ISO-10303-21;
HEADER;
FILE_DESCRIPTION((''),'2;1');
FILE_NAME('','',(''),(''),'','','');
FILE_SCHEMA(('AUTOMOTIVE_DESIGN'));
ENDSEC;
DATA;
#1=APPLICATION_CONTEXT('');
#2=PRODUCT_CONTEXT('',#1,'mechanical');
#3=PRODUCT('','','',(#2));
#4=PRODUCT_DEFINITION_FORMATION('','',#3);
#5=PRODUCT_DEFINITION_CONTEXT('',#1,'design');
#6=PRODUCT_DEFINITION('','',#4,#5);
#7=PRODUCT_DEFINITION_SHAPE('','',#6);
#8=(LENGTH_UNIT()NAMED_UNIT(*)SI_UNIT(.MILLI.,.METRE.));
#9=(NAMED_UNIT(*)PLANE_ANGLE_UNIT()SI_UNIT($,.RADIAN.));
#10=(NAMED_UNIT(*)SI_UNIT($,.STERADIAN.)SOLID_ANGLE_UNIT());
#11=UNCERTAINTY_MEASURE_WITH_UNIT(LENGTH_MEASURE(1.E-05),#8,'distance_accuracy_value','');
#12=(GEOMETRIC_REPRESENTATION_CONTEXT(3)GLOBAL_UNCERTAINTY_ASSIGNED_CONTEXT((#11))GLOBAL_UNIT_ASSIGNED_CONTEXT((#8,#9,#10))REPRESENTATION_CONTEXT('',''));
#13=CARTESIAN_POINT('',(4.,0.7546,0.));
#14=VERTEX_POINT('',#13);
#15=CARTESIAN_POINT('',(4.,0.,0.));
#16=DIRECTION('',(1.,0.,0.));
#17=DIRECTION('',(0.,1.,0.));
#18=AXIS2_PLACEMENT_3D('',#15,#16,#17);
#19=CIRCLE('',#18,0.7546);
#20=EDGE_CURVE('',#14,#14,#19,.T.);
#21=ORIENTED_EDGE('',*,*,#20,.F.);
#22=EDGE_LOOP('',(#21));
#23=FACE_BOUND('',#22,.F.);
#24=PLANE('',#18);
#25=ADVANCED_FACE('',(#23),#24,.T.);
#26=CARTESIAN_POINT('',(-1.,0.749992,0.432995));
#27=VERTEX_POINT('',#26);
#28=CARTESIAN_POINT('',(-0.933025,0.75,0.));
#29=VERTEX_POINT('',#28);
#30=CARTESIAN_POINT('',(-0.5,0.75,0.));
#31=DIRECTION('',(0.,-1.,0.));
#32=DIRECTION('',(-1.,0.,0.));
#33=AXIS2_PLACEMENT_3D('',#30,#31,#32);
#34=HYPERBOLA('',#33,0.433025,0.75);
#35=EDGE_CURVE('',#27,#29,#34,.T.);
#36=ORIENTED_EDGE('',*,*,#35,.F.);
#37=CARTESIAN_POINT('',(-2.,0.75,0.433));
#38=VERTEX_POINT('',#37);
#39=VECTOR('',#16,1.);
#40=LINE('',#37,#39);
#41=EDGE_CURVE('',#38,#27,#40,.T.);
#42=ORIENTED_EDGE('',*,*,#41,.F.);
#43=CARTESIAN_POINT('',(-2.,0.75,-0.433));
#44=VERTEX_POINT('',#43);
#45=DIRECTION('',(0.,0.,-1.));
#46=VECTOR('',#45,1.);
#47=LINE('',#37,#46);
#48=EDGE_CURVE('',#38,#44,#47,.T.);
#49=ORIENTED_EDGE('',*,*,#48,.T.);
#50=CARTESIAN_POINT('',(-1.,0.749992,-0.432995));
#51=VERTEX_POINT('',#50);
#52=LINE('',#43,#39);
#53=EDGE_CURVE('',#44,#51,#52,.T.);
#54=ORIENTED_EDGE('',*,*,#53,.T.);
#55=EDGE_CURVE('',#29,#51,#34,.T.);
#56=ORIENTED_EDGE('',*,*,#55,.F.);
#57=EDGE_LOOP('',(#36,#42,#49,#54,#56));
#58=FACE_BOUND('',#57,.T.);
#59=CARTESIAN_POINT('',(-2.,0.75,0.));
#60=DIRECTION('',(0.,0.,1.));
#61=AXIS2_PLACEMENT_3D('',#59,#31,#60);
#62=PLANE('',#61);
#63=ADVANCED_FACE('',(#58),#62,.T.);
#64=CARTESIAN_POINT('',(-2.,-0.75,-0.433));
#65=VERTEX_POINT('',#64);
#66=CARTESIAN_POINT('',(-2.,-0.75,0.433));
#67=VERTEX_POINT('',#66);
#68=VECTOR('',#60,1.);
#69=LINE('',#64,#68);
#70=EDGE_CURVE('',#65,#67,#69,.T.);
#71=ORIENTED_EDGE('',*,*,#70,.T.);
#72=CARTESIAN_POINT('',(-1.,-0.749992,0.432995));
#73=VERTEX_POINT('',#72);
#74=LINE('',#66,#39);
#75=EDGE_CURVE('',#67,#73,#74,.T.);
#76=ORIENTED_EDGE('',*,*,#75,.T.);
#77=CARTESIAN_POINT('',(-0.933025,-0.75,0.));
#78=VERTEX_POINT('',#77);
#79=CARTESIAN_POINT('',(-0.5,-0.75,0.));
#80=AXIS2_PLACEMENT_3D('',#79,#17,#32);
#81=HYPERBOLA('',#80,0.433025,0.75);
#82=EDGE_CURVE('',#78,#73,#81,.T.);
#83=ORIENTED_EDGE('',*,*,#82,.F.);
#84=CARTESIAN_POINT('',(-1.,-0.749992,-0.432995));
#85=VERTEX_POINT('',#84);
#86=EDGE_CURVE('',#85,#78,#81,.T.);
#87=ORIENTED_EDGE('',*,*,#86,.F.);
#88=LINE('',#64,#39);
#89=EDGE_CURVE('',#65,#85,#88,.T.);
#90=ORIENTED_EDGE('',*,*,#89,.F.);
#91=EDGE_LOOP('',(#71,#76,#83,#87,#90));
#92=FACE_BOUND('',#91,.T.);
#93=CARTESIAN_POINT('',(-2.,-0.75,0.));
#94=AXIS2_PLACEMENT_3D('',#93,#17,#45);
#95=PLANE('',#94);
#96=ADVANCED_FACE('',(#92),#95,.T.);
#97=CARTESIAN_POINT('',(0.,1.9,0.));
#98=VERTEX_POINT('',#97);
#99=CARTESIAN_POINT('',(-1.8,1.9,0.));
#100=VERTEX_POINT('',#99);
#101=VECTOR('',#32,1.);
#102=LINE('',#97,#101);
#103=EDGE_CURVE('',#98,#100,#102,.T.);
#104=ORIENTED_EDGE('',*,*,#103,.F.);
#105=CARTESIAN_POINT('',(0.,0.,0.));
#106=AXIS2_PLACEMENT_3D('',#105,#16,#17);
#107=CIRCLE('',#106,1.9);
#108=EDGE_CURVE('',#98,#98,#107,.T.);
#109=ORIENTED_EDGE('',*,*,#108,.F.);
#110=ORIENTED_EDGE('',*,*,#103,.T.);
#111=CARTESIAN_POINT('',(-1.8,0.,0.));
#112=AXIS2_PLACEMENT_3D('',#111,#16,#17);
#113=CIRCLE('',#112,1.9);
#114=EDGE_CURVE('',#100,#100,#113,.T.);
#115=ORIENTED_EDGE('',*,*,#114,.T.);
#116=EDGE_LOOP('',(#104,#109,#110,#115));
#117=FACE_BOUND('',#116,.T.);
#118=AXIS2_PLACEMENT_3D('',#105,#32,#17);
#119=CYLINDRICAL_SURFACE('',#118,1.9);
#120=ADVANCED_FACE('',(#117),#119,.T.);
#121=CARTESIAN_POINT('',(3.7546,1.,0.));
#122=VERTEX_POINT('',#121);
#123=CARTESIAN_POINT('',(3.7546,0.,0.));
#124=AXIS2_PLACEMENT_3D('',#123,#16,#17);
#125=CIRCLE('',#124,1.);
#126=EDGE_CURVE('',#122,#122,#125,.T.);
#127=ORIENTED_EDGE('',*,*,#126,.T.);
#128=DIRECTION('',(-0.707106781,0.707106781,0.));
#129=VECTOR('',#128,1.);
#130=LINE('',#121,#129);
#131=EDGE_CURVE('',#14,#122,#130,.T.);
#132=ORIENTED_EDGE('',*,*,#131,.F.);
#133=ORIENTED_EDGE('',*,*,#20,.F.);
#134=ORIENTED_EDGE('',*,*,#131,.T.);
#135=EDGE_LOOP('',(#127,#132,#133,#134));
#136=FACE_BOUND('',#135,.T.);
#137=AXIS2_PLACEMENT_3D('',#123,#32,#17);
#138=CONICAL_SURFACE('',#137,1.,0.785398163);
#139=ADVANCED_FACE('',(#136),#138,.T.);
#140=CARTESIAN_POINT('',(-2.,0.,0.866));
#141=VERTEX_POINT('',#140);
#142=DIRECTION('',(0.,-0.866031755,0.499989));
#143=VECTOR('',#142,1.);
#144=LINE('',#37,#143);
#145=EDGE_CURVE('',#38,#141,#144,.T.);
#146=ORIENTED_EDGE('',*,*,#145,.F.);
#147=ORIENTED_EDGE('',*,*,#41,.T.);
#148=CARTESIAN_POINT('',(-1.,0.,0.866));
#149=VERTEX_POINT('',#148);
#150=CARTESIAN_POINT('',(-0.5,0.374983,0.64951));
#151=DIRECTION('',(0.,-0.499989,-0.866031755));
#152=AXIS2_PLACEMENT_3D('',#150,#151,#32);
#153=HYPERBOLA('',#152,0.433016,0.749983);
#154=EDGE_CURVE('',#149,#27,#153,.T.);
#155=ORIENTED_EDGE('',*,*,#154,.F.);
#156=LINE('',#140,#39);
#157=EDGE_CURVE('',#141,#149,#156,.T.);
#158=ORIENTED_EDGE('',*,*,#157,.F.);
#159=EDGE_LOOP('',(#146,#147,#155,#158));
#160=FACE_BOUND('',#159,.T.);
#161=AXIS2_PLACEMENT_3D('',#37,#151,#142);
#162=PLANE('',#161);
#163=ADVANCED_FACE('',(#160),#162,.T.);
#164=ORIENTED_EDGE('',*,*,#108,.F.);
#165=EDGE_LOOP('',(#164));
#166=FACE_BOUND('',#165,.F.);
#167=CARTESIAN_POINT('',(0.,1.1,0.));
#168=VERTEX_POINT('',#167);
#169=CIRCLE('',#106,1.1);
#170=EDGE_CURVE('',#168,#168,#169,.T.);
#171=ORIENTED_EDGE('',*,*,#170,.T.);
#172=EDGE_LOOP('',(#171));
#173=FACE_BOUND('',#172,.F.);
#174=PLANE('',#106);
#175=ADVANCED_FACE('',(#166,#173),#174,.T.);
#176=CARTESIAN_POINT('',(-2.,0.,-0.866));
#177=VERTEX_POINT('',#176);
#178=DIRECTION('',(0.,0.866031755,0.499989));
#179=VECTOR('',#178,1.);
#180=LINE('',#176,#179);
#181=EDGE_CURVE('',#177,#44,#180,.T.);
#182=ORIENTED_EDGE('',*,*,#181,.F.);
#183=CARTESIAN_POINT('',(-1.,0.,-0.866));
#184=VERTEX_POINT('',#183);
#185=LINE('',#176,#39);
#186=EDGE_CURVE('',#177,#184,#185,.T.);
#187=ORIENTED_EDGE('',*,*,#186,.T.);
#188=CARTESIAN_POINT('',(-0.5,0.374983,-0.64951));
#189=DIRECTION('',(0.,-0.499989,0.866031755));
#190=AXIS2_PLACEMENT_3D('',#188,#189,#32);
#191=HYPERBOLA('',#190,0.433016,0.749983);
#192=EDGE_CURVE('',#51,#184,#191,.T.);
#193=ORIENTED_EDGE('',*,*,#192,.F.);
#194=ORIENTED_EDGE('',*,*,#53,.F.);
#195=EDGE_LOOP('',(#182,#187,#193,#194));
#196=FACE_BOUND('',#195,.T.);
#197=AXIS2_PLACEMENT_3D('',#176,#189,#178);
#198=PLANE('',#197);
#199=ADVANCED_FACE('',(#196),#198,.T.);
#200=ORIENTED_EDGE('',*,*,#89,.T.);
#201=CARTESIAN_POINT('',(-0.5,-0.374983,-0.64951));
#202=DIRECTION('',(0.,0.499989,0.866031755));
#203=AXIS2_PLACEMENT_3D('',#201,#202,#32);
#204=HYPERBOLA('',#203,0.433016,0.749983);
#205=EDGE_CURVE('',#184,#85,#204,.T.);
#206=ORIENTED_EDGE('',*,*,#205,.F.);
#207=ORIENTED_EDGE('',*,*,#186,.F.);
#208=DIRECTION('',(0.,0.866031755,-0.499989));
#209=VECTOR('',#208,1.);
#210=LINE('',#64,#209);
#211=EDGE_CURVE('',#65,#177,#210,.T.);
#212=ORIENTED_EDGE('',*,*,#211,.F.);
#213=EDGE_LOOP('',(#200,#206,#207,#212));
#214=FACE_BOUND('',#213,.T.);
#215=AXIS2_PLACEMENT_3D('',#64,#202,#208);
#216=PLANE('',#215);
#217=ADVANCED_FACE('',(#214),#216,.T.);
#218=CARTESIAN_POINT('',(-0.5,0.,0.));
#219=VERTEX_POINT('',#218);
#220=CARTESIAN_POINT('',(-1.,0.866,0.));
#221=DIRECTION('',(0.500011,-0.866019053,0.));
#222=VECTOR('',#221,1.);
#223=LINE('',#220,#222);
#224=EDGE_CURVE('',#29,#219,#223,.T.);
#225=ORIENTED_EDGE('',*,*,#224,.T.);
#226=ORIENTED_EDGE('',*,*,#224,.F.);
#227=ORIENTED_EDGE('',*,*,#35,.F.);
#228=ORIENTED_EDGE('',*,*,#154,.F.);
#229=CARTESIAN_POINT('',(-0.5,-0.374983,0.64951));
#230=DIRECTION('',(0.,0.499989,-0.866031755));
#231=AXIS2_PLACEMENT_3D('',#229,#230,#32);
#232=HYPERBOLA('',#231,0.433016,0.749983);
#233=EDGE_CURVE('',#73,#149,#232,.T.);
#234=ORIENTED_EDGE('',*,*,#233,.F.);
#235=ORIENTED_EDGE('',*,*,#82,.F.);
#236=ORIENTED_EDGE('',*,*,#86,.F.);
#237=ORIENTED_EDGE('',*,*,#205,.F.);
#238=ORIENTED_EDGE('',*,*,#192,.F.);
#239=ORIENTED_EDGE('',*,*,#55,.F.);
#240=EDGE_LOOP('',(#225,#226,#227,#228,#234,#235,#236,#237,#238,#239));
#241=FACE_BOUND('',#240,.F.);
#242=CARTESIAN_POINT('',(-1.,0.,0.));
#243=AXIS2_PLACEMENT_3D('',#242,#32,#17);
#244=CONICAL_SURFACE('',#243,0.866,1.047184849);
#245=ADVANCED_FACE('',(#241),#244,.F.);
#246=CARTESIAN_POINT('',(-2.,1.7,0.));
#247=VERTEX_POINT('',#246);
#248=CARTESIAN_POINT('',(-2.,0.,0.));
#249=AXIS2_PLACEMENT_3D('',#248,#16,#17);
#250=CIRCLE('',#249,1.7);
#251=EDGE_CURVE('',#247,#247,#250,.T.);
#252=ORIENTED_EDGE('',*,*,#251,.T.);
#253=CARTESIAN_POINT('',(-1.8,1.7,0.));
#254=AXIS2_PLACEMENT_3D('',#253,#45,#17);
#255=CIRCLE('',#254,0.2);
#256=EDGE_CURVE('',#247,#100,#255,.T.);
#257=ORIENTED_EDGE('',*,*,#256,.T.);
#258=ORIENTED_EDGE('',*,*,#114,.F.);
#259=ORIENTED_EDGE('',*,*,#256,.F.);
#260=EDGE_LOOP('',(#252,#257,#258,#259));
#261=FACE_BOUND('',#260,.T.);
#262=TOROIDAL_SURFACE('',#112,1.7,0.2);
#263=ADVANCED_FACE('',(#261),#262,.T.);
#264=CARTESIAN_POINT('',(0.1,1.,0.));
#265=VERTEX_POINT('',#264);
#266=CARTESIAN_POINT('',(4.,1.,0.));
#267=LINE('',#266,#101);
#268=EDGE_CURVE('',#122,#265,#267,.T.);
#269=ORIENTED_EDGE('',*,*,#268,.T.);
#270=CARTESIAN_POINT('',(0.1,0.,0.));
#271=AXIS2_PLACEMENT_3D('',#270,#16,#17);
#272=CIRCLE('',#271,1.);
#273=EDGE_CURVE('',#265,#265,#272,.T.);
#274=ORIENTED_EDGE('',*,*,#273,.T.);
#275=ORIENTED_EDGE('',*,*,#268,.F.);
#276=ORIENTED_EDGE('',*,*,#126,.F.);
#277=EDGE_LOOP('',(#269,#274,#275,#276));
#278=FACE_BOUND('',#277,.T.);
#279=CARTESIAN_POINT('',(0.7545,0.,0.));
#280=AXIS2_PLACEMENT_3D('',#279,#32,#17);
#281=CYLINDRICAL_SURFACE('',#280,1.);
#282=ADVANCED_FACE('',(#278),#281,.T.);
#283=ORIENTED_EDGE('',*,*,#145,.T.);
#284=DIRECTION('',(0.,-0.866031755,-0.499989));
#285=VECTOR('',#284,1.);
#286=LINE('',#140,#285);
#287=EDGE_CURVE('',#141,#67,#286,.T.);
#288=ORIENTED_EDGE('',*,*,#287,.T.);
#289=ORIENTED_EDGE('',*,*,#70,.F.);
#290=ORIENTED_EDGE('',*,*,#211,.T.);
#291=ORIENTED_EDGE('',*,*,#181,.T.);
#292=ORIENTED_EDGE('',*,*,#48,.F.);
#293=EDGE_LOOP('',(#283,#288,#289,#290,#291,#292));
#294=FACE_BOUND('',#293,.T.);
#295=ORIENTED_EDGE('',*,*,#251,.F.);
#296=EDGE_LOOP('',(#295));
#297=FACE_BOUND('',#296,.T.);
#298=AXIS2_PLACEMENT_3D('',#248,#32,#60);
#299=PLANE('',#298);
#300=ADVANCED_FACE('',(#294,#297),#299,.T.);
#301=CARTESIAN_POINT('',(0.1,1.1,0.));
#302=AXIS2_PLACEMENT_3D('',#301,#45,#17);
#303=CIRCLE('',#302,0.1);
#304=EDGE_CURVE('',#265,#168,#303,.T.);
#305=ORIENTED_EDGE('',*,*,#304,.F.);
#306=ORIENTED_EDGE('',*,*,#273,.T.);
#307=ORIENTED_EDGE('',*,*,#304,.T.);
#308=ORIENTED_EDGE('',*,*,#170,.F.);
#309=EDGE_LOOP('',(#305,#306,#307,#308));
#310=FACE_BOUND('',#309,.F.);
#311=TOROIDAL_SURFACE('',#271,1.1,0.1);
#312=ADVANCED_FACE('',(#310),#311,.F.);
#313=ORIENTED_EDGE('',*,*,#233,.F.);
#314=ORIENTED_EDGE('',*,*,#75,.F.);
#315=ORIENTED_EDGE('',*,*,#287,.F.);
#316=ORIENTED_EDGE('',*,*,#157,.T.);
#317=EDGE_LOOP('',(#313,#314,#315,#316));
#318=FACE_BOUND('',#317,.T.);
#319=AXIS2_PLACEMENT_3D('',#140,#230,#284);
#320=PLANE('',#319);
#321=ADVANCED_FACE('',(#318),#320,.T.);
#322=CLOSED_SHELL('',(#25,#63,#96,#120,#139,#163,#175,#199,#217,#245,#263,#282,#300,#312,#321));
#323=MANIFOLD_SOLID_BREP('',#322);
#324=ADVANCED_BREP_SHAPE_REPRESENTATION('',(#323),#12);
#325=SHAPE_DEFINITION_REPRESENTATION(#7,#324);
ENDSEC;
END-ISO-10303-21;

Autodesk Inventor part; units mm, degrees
ref_plane "YZ Plane" through (0, 0, 0) normal (1, 0, 0) x (0, 1, 0)
ref_plane "XZ Plane" through (0, 0, 0) normal (0, 1, 0) x (-1, 0, 0)
sketch "Skizze1" plane through (0, 0, 0) normal (0, 0, 1) x (1, 0, 0)
  line L0 (-0.5, 0) -> (4, 0)
  line L1 (4, 0) -> (4, 1)
  line L2 (4, 1) -> (1, 1)
  line L3 (1, 1) -> (0.7545, 1)
  line L4 (0.7545, 1) -> (0, 1)
  line L5 (0, 1) -> (0, 1.9)
  line L6 (0, 1.9) -> (-2, 1.9)
  line L7 (-2, 1.9) -> (-2, 0.866)
  line L8 (-2, 0.866) -> (-1, 0.866)
  line L9 (-1, 0.866) -> (-0.5, 0)
  line L10 (-3.2, 0) -> (5.2, 0) projected
  line L11 (0, -0.38) -> (0, 2.28) projected
  line L12 (1, 1) -> (0, 1) construction
  dimension "d1" = 3
  dimension "d2" = 0.2455
  dimension "d3" = 2
  dimension "d4" = 1
  dimension "d5" = 60
  dimension "d6" = 2
  dimension "d7" = 2
  dimension "d8" = 1.7321
  dimension "d9" = 3.8
  dimension "d26" = 4
revolve "Körper" add sketch "Skizze1" angle 360 about axis through (-0.5, 0, 0) along (1, 0, 0)
sketch "Skizze2" plane through (-2, 0, 0) normal (-1, 0, 0) x (0, 0, 1)
  circle A0 centre (0, 0) radius 0.866 projected
  line L0 (0, -2.66) -> (0, 2.66) projected
  line L1 (-2.66, 0) -> (2.66, 0) projected
  line L2 (0.866, 0) -> (0.433, -0.75)
  line L3 (0.433, -0.75) -> (-0.433, -0.75)
  line L4 (-0.433, -0.75) -> (-0.866, 0)
  line L5 (-0.866, 0) -> (-0.433, 0.75)
  line L6 (-0.433, 0.75) -> (0.433, 0.75)
  line L7 (0.433, 0.75) -> (0.866, 0)
extrude "Loch" add sketch "Skizze2" against normal up to next contours L7 A0 | A0 L2 | L6 L0 A0 | A0 L0 L3 | L0 L6 A0 | A0 L3 L0 | L4 A0 | A0 L5
fillet "Rundung1" radius 0.2 1 edges at (-2, -1.9, 0)
thread "Gewinde" size "M2x0.4" class "6g" standard "ISO Metric profile" length 3
chamfer "Fase1" distance 0.2454 distance2 0.2454 1 edges at (4, -1, 0) measured on face at (4, -0.4588, -0.3309)
ref_plane "Work Plane1" through (29, 0, 0) normal (0, -1, 0) x (1, 0, 0)
fillet "Fillet2" radius 0.1 1 edges at (0, -1, 0)
equation "\"d30\" = R"
equation "\"d15\" = -0.5 * SPD + 0.5 * GD"
equation "\"d16\" = GUL"
equation "\"d17\" = RR"
equation "\"d13\" = GEL"
equation "\"d1\" = GEL"
equation "\"d3\" = KOH"
equation "\"d4\" = INTI"
equation "\"d6\" = GD"
equation "\"d7\" = BDM"
equation "\"d8\" = 1.1547 * SW"
equation "\"d9\" = KOD"
equation "\"d26\" = NLG"
equation "\"GD\" = NND"
equation "\"NLG\" = 4"
equation "\"GEL\" = 3"
equation "\"KOD\" = 3.8"
equation "\"KOH\" = 2"
equation "\"INTI\" = 1"
equation "\"GAL\" = 0.61345 * PTC"
equation "\"GUL\" = 0.61345 * PTC"
equation "\"BDM\" = NND"
equation "\"SW\" = 1.5"
equation "\"RR\" = 0.2"
equation "\"SPD\" = NND - 1.2269 * PTC"
equation "\"R\" = 0.1"
equation "\"TOA\" = 30deg"
equation "\"GD1\" = THREADDIA - 1.2269 * PTC"
equation "\"THREADDIA\" = 2"
equation "\"FAWI\" = 45deg"
equation "\"ANG\" = 120deg"
equation "\"PTC\" = 0.4"
equation "\"NND\" = 2"
equation "\"E0\" = 1.155 * SW"
properties part number "DIN 912 - M2 x 4" material "Stahl, weich"
